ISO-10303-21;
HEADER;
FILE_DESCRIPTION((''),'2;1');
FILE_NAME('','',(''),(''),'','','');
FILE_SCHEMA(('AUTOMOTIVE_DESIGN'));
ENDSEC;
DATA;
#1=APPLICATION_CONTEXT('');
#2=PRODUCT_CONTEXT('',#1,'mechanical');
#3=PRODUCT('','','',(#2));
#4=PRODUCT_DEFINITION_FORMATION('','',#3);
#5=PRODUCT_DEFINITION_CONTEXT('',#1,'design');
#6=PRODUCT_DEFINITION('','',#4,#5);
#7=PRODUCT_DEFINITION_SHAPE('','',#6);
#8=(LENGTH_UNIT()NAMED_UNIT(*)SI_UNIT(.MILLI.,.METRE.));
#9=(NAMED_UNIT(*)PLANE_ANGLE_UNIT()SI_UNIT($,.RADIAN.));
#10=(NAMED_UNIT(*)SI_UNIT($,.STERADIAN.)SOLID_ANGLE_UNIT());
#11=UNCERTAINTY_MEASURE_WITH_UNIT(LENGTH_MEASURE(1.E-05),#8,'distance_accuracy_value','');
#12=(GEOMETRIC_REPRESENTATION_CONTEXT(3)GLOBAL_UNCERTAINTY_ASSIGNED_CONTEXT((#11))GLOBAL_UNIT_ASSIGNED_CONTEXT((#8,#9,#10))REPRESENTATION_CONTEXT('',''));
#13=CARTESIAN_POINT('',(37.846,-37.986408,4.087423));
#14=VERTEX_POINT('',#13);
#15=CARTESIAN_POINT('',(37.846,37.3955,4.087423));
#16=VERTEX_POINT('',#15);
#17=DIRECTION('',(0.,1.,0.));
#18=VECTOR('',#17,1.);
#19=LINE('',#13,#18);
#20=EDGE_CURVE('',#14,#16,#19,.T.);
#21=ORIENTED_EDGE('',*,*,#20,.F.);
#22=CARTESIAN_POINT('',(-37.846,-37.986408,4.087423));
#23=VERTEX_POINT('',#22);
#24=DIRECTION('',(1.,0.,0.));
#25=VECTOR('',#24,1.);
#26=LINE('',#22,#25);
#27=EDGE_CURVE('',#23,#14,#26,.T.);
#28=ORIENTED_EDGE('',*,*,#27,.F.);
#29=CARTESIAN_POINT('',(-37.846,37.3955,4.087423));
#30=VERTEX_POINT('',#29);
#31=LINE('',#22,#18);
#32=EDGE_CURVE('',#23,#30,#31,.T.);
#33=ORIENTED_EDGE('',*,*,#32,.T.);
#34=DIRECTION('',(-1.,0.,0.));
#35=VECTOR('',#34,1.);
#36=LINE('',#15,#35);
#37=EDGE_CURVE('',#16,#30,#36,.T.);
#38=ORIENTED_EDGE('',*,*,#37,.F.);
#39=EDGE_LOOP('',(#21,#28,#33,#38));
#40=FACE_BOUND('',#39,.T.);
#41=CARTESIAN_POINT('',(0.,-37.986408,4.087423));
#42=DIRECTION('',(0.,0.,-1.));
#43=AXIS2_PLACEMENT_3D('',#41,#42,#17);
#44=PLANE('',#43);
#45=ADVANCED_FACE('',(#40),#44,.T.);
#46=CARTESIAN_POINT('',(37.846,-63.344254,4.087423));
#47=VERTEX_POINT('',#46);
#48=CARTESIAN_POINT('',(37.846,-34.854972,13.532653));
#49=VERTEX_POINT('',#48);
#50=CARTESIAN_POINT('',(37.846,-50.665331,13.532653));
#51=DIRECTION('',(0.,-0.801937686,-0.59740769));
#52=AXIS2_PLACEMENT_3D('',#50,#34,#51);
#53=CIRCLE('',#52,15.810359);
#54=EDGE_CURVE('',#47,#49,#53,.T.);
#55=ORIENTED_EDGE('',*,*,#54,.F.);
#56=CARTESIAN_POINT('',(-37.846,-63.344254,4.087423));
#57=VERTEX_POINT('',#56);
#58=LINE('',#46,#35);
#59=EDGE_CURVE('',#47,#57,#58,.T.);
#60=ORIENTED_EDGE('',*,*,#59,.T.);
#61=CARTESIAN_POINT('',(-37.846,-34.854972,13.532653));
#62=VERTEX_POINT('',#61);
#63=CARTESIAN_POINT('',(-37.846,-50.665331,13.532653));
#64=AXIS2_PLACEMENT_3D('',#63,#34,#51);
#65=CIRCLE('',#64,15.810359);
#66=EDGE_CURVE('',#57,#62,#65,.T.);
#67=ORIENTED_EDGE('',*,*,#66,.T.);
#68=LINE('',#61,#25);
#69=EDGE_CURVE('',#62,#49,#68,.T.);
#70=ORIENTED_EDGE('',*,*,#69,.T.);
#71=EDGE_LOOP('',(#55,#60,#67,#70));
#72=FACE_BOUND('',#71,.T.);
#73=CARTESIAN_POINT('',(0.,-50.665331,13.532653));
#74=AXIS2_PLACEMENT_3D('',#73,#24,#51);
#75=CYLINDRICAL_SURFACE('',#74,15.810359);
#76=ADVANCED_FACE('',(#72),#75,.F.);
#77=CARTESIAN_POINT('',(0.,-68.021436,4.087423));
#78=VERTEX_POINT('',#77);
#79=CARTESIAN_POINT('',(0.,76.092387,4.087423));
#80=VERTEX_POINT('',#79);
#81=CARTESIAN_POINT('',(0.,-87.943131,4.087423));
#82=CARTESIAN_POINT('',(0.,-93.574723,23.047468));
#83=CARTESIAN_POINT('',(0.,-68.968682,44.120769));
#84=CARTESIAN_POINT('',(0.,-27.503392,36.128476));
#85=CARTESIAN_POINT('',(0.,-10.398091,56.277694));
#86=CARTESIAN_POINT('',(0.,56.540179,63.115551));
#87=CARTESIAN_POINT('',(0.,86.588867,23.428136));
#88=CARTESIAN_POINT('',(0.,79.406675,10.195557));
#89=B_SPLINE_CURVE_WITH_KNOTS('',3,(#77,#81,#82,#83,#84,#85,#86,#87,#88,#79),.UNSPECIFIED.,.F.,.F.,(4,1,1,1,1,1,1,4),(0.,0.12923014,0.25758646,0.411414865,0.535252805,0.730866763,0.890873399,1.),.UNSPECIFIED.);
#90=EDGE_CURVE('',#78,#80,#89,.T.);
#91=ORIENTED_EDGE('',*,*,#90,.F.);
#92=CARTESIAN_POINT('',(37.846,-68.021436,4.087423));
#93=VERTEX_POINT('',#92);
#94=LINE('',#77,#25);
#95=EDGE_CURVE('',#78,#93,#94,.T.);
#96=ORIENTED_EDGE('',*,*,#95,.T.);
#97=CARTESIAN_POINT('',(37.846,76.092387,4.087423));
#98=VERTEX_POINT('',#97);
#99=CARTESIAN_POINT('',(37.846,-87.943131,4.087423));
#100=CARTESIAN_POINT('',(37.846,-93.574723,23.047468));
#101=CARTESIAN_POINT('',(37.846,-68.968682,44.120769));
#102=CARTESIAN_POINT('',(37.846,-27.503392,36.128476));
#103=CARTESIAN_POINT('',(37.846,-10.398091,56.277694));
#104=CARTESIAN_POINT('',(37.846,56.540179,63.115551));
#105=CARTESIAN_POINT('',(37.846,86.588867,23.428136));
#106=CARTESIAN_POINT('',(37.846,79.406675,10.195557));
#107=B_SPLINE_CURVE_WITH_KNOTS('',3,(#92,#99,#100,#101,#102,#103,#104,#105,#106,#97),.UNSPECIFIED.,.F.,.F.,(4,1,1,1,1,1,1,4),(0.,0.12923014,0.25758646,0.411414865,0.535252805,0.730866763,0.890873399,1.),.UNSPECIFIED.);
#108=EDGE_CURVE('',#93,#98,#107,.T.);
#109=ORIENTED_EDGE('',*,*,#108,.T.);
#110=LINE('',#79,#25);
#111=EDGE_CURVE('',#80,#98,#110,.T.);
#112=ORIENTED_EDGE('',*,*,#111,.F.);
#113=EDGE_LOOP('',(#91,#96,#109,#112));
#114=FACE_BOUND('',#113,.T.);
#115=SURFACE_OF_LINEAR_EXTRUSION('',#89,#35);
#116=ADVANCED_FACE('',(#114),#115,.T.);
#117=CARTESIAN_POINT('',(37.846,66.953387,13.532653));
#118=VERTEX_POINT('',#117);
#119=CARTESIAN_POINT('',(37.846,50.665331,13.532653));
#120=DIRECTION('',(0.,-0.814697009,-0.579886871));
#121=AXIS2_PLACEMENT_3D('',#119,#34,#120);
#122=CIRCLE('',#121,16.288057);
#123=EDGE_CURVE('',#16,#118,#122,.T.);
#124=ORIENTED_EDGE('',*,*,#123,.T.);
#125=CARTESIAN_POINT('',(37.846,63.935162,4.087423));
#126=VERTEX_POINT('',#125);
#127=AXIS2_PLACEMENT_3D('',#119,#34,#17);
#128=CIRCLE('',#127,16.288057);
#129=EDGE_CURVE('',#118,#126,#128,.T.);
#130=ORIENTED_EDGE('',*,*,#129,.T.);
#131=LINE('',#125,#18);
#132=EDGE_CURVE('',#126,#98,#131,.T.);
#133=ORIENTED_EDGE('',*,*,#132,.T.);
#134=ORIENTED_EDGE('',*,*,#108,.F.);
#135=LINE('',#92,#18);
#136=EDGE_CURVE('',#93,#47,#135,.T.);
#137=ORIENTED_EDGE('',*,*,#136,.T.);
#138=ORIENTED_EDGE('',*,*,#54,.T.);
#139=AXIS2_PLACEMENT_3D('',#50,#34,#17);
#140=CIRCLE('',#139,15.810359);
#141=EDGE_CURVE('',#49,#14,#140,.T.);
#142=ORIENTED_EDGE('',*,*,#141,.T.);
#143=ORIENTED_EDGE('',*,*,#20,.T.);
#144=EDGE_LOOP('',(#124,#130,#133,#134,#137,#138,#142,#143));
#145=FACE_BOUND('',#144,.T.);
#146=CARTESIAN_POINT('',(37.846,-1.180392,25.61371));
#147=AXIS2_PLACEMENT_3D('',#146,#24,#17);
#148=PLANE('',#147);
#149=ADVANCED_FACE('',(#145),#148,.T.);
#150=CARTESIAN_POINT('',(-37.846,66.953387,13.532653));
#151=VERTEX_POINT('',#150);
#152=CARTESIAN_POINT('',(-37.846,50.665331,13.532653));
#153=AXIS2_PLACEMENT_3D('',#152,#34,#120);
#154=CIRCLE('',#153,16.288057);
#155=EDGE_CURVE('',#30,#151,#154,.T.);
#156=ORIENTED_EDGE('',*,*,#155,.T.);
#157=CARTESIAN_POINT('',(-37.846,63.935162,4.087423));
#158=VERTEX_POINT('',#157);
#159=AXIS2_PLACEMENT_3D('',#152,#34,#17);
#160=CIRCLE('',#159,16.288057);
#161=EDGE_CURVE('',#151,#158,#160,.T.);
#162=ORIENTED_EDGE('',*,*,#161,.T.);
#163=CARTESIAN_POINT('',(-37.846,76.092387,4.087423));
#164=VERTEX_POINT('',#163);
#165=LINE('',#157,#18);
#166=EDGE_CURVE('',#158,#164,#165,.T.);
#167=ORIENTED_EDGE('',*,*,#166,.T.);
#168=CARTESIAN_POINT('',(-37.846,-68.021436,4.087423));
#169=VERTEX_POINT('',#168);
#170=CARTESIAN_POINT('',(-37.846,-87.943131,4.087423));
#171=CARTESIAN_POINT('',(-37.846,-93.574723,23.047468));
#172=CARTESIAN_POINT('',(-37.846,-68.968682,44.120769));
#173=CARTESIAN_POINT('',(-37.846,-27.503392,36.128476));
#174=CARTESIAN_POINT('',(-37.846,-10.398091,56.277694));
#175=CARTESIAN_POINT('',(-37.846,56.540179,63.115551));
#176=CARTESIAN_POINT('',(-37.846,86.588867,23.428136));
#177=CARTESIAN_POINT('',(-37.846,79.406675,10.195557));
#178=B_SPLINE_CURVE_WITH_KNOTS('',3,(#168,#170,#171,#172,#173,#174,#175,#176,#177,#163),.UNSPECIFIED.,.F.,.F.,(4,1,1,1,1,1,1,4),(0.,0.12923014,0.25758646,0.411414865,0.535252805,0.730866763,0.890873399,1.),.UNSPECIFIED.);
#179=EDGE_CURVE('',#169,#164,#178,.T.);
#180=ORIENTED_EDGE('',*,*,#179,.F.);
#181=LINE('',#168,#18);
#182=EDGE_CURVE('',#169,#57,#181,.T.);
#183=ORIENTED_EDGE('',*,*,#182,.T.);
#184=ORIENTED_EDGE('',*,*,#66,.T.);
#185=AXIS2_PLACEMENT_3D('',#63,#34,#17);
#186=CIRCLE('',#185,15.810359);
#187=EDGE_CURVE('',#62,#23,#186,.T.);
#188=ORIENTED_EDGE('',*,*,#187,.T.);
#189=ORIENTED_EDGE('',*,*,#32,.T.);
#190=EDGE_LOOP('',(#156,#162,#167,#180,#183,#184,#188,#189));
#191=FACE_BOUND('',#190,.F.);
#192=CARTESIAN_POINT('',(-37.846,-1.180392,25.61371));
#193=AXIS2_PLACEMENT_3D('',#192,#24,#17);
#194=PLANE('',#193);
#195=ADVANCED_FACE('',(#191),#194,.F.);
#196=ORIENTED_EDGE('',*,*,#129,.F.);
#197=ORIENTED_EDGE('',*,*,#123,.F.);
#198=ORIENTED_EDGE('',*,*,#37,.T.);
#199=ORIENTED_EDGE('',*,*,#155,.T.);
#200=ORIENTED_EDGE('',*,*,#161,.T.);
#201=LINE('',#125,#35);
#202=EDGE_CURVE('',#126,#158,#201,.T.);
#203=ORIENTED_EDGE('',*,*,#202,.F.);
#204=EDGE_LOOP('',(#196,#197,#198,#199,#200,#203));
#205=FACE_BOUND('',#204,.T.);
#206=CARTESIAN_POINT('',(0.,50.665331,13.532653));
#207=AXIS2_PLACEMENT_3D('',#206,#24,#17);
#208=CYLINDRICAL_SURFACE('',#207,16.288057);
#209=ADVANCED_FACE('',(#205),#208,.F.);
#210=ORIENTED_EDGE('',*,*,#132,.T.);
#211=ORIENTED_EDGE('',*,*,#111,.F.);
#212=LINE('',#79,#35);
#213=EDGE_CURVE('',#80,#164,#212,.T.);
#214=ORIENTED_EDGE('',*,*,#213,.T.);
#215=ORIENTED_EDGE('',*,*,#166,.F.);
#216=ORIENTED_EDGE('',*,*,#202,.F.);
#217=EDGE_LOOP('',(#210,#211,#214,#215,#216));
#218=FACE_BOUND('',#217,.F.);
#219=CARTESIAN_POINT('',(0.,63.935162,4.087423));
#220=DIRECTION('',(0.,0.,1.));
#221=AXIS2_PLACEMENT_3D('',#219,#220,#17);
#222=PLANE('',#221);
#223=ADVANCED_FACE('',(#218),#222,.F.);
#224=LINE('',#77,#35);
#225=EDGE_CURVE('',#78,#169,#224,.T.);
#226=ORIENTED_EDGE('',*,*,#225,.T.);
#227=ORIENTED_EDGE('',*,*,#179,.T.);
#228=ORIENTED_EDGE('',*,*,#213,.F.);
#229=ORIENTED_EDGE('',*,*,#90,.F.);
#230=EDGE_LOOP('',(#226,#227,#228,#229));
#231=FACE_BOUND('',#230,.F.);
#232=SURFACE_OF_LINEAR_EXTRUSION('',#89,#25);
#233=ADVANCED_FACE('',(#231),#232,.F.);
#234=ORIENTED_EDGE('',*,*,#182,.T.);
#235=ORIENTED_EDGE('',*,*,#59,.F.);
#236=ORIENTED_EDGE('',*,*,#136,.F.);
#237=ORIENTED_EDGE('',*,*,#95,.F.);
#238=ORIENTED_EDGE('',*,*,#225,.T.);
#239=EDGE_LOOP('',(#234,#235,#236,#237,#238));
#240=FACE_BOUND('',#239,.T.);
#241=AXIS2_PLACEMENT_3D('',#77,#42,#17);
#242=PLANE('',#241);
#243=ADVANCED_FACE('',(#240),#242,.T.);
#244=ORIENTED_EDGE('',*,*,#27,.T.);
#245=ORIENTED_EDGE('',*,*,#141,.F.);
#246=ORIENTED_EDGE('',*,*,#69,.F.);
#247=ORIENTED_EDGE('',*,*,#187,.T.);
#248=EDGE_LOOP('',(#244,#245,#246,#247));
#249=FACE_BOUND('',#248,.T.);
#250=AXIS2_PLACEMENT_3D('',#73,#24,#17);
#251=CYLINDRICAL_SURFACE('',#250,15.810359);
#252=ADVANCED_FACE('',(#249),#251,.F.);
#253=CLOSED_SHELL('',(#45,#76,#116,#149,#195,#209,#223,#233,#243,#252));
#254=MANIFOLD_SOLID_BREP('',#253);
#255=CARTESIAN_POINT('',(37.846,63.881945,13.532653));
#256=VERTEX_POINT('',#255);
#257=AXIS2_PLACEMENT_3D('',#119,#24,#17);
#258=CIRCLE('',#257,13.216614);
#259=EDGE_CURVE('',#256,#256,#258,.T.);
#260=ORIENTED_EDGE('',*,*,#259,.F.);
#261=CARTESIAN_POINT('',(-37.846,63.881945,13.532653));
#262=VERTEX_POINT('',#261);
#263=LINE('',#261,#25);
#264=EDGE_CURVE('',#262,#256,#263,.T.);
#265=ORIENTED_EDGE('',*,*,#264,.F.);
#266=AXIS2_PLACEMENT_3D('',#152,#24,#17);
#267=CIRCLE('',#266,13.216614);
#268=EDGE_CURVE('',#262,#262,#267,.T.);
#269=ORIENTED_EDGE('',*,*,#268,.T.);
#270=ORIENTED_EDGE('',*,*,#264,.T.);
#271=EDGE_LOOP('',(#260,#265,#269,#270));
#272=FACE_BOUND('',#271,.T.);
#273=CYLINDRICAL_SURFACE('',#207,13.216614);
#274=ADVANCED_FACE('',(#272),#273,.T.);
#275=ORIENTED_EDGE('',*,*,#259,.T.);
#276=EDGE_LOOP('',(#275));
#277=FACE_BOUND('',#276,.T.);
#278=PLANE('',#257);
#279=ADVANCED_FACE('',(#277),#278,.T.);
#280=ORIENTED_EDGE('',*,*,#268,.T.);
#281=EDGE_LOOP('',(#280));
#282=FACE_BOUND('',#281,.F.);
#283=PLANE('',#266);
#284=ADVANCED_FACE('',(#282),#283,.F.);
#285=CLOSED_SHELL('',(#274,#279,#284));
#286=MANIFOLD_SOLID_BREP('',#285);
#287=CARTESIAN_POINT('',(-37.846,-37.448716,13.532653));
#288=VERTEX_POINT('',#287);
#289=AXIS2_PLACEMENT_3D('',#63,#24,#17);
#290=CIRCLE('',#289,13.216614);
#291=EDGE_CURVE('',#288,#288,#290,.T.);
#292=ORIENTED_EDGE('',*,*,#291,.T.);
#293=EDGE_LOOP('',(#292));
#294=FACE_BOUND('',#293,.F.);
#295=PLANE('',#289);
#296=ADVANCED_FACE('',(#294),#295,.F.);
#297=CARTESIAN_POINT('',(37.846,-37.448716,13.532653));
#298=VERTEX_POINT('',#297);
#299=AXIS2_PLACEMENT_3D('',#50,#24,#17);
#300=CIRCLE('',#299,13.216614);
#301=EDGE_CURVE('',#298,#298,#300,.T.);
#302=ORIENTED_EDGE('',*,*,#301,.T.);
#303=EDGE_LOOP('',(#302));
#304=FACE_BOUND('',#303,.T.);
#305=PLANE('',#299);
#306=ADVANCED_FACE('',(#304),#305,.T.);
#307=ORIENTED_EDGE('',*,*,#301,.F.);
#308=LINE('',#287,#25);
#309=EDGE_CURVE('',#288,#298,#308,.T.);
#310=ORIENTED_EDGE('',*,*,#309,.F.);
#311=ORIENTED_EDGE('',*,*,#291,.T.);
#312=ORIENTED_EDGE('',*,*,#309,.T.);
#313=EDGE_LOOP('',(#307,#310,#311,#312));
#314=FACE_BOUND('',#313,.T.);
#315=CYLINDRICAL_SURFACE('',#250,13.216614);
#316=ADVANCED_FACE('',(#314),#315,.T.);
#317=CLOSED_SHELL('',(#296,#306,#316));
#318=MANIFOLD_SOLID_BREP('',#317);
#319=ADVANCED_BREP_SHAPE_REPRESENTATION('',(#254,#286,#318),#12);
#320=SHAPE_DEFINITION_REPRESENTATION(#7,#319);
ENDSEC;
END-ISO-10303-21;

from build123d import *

# Parameters (mm, degrees)
F0_R     = 13.216614321
F1_DEPTH = 37.846


with BuildPart() as f1:
    # F0 (on Right) → F1 (new body, symmetric)
    with BuildSketch(Plane.YZ):
        with Locations((-50.6653307866, 13.5326530386)):
            Circle(F0_R)
    extrude(amount=F1_DEPTH, both=True)


with BuildPart() as f1b:
    # F0 (on Right) → F1, piece 2 (new body, symmetric)
    with BuildSketch(Plane.YZ):
        with Locations((50.6653307866, 13.5326530386)):
            Circle(F0_R)
    extrude(amount=F1_DEPTH, both=True)


with BuildPart() as f1c:
    # F0 (on Right) → F1, piece 3 (new body, symmetric)
    with BuildSketch(Plane.YZ):
        with BuildLine():
            ThreePointArc((-63.344253716, 4.0874228362), (-55.6407269298, 28.5397478089), (-34.8549715172, 13.5326530386))
            ThreePointArc((-34.8549715172, 13.5326530386), (-35.6582360163, 8.5572568954), (-37.9864078571, 4.0874228362))
            Line((-37.9864078571, 4.0874228362), (37.395499757, 4.0874228362))
            ThreePointArc((37.395499757, 4.0874228362), (45.707456761, 29.0478157602), (66.9533874273, 13.5326530386))
            ThreePointArc((66.9533874273, 13.5326530386), (66.1804935081, 8.574779013), (63.9351618162, 4.0874228362))
            Line((63.9351618162, 4.0874228362), (76.0923872439, 4.0874228362))
            add(Edge.make_bspline(
                [(-68.0214359061, 4.0874228362), (-87.9431305315, 4.0874228362), (-93.5747225099, 23.0474680653), (-68.9686816123, 44.1207693106), (-27.5033923902, 36.1284762743), (-10.3980912607, 56.2776935532), (56.5401787407, 63.1155509197), (86.5888672318, 23.4281355947), (79.4066745998, 10.1955566569), (76.0923872439, 4.0874228362)],
                knots=[0, 0, 0, 0, 0.1292301403, 0.2575864603, 0.4114148648, 0.5352528053, 0.730866763, 0.8908733985, 1, 1, 1, 1], degree=3))
            Line((-68.0214359061, 4.0874228362), (-63.344253716, 4.0874228362))
        make_face()
    extrude(amount=F1_DEPTH, both=True)


solid = Compound([f1.part, f1b.part, f1c.part])
